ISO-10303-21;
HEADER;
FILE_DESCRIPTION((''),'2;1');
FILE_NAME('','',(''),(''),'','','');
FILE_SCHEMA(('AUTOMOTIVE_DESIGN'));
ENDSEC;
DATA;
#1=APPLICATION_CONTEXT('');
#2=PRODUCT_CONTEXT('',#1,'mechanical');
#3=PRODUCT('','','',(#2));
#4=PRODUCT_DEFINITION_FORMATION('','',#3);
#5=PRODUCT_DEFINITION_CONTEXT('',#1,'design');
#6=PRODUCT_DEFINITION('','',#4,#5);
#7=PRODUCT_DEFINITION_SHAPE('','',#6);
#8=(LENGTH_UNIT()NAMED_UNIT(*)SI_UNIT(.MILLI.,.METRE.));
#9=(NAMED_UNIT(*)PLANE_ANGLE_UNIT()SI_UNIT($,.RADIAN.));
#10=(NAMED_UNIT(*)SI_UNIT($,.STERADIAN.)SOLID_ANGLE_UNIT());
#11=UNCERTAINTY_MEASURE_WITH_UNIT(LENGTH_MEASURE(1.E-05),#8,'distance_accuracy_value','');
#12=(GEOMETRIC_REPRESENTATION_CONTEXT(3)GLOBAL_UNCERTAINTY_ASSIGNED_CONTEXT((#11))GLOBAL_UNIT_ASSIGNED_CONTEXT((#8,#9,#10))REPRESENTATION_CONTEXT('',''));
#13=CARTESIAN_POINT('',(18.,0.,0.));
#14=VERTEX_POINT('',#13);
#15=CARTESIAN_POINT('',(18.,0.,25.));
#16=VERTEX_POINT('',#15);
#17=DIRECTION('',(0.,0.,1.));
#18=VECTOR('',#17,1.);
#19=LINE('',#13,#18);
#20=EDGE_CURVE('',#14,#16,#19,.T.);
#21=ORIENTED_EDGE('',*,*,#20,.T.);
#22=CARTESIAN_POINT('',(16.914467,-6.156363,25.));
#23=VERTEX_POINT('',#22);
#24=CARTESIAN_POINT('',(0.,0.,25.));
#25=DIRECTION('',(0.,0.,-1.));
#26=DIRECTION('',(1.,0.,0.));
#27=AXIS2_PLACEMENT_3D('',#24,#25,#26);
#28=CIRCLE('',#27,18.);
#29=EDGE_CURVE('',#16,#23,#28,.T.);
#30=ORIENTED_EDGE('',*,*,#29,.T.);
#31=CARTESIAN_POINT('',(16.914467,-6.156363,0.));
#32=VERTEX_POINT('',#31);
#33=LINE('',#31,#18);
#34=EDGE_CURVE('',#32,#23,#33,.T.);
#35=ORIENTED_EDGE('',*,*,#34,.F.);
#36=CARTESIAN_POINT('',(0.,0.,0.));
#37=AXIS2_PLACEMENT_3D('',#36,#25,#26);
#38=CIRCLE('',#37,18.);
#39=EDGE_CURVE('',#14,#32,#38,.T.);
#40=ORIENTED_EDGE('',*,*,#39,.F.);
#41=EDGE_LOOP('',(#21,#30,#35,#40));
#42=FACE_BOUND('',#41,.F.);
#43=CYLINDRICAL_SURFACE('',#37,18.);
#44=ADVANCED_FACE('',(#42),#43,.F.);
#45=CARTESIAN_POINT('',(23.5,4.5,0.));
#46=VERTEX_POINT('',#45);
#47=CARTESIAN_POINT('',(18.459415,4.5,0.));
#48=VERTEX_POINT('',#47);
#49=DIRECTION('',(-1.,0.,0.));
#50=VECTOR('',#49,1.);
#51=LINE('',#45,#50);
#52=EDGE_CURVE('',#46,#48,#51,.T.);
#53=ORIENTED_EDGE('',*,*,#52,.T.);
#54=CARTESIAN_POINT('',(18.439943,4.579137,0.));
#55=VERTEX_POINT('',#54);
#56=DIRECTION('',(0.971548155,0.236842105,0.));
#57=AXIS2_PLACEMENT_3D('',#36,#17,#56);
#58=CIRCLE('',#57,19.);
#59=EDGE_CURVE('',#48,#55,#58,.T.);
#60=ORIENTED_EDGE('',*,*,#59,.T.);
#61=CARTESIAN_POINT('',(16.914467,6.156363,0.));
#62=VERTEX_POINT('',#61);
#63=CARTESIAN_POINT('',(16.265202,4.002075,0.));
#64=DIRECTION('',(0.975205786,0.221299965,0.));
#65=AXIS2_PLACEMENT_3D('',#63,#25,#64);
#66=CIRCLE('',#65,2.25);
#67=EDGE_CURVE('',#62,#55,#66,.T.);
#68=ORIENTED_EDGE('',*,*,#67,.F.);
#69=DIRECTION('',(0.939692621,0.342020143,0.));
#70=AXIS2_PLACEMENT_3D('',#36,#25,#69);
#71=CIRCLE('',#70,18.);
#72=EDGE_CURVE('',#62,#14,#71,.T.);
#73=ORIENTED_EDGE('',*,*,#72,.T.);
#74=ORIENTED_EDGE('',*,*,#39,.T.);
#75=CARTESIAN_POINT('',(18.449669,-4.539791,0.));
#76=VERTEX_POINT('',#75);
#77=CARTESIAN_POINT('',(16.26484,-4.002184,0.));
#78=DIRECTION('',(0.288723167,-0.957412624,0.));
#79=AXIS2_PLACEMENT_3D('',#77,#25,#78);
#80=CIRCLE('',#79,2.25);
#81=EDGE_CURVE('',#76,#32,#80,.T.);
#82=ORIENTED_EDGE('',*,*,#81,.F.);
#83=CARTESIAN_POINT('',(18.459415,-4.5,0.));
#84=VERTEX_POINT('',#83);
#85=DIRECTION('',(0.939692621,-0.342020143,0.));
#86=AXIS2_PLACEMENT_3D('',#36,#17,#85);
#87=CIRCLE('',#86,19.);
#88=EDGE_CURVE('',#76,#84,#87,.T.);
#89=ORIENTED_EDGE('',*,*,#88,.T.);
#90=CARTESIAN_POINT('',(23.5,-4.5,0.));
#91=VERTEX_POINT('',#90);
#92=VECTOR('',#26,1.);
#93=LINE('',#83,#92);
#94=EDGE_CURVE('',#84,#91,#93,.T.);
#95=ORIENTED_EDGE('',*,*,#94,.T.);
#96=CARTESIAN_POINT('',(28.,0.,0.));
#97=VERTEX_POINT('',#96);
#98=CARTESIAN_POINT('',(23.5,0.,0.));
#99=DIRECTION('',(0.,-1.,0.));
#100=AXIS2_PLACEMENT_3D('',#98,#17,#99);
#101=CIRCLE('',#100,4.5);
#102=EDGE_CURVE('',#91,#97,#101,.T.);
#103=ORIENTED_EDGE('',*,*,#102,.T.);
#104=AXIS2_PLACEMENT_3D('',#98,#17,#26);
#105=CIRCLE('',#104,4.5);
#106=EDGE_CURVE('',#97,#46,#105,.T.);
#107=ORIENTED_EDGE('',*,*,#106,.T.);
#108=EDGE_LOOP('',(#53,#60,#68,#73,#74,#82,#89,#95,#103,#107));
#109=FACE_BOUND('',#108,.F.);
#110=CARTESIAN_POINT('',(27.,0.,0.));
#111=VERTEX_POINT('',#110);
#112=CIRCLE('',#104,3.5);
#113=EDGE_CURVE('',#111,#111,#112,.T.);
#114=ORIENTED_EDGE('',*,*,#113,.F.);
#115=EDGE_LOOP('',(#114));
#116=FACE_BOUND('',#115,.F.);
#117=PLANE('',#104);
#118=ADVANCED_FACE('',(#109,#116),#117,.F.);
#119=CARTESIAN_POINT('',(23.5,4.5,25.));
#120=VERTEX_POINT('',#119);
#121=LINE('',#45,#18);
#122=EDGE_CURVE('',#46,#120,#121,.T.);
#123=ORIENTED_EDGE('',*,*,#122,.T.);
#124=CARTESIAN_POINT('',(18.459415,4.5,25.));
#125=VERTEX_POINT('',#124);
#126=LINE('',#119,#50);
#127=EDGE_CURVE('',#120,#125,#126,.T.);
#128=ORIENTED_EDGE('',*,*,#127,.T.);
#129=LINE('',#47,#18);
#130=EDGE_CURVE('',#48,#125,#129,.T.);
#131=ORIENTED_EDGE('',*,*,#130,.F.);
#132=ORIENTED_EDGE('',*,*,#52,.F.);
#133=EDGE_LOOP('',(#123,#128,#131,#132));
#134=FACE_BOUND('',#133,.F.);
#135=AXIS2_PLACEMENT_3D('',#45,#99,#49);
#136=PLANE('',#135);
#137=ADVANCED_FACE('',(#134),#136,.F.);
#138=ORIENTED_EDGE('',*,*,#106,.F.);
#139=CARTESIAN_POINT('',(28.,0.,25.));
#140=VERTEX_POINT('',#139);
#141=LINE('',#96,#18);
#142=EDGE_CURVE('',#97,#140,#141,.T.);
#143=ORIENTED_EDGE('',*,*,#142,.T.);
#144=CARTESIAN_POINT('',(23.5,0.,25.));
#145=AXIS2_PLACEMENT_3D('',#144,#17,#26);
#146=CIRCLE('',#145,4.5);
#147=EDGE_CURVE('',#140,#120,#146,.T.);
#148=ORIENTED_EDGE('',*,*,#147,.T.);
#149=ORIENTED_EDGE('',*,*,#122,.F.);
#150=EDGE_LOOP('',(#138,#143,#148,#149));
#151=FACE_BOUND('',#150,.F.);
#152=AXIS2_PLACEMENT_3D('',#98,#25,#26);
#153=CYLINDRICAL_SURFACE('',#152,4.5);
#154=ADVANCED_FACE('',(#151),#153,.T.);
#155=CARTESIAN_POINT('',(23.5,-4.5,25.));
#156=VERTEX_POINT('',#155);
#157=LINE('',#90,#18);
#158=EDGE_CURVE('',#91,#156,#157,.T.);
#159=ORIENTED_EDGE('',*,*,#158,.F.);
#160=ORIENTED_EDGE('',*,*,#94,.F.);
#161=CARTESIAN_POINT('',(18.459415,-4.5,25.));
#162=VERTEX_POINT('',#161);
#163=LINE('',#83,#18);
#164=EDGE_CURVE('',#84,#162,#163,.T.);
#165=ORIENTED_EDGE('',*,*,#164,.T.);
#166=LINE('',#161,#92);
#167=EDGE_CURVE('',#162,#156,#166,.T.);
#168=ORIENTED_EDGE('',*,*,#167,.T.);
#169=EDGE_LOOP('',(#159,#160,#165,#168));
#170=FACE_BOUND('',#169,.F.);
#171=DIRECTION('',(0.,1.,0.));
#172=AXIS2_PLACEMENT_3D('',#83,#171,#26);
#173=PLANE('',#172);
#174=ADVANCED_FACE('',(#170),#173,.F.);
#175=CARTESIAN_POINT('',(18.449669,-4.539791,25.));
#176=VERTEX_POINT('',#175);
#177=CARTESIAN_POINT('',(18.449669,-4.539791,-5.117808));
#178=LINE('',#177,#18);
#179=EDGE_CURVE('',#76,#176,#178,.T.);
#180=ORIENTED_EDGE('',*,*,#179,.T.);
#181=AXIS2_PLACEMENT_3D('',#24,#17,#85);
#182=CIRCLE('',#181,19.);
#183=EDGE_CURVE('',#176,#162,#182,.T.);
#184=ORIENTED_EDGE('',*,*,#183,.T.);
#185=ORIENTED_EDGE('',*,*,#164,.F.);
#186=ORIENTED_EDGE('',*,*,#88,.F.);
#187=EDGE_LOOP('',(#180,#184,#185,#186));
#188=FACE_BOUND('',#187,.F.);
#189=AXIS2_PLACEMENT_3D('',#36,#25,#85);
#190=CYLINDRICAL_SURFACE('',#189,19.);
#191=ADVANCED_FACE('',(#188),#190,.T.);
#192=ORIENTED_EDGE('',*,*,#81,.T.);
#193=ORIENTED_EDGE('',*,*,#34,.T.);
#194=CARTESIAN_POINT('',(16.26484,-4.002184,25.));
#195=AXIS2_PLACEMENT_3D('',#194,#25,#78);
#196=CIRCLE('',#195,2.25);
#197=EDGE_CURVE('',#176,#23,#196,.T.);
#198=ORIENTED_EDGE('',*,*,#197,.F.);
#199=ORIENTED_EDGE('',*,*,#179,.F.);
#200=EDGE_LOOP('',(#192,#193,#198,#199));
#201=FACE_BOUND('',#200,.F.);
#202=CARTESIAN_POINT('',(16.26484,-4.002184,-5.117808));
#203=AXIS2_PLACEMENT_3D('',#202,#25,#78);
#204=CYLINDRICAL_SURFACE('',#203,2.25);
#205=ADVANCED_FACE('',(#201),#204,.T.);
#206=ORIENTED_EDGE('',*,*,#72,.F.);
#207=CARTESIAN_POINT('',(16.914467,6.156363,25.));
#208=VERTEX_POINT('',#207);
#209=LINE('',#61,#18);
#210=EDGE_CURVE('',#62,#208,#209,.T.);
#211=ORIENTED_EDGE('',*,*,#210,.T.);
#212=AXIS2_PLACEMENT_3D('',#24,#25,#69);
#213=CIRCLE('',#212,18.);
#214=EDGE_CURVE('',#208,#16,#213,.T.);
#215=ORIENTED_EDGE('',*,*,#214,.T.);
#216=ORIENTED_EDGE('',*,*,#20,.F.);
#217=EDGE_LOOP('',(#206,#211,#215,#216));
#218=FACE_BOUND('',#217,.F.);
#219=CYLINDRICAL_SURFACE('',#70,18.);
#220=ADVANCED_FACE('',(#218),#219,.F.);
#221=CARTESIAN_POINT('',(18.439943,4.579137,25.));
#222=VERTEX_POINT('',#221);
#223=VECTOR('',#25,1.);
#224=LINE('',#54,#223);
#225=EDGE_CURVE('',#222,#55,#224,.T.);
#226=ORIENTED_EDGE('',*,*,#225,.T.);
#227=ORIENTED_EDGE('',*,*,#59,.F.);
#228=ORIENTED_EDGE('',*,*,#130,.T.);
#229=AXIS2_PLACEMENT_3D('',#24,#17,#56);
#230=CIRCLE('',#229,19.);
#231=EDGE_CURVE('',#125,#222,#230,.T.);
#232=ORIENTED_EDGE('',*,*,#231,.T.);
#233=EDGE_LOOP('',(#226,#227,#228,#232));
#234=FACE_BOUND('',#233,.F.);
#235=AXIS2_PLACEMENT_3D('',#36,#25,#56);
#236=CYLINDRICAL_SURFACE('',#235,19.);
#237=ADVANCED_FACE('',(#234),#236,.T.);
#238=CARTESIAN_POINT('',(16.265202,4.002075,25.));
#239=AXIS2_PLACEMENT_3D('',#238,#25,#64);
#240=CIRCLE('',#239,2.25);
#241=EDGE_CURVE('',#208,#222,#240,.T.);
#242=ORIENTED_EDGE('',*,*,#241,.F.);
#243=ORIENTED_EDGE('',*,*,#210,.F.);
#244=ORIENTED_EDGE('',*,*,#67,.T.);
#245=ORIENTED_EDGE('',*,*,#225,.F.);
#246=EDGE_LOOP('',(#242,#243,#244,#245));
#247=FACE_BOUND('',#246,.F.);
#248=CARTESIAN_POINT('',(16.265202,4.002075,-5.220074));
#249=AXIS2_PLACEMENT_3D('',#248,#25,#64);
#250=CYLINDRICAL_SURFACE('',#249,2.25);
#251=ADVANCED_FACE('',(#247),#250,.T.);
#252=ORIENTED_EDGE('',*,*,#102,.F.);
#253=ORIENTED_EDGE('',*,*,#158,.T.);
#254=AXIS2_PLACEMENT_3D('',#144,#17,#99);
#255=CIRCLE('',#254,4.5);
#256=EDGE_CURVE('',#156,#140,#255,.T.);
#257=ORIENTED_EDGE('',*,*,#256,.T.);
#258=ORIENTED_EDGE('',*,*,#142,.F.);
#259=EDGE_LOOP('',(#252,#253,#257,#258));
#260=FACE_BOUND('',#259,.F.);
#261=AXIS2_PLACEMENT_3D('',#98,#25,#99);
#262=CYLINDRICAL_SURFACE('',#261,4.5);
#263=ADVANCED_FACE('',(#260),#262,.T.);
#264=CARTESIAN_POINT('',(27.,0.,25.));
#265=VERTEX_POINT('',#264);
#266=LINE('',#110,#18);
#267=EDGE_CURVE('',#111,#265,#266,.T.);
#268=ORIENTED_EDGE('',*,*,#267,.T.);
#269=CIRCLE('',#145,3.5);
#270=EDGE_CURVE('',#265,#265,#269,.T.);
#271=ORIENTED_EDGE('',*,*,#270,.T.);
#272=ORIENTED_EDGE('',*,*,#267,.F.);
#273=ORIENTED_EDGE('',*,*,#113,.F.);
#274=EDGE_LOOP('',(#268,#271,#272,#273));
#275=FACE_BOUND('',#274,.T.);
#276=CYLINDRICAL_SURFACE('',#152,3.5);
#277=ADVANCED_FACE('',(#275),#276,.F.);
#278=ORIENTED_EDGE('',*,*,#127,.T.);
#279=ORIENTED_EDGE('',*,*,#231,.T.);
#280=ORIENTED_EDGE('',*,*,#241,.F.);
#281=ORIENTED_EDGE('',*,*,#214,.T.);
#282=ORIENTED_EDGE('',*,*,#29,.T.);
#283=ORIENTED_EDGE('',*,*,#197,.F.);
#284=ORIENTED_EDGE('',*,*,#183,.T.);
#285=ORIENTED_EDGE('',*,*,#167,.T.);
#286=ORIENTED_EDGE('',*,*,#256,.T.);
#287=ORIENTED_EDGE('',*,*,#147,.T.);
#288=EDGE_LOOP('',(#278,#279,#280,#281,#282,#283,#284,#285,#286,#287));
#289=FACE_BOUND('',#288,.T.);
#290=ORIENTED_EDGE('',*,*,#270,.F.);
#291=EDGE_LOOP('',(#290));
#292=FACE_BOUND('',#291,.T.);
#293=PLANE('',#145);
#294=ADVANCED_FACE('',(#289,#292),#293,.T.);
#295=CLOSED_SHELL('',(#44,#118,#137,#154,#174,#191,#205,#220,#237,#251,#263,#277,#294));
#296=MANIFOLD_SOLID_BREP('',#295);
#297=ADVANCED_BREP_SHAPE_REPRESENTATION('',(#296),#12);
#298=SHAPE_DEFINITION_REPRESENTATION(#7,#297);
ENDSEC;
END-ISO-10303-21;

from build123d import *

# Parameters (mm, degrees)
F0_R        = 3.5
F1_DEPTH    = 25
F2_T1_DEPTH = 35.23561564
F2_T3_DEPTH = 35.4401476299


# Not quite as in the source:
# - a fillet or chamfer that OpenCascade refuses, or shapes differently, is made with other operations: its cross-section is extruded or revolved along the edge and cut away or added


with BuildPart() as f1:
    # F0 (on Top) → F1 (new body)
    with BuildSketch(Plane.XY):
        with BuildLine():
            ThreePointArc((23.5, 4.5), (20.3180194847, 3.1819805153), (19, 0))
            ThreePointArc((19, 0), (20.3180194847, -3.1819805153), (23.5, -4.5))
            ThreePointArc((23.5, -4.5), (26.6819805153, -3.1819805153), (28, 0))
            ThreePointArc((28, 0), (26.6819805153, 3.1819805153), (23.5, 4.5))
        make_face()
        with Locations((23.5, 0)):
            Circle(F0_R, mode=Mode.SUBTRACT)
        with BuildLine():
            ThreePointArc((18.459414942, 4.5), (18.8643696409, 2.2661769682), (19, 0))
            ThreePointArc((19, 0), (20.3180194847, 3.1819805153), (23.5, 4.5))
            Line((23.5, 4.5), (18.459414942, 4.5))
        make_face()
        with BuildLine():
            ThreePointArc((23.5, -4.5), (20.3180194847, -3.1819805153), (19, 0))
            ThreePointArc((19, 0), (18.8643696409, -2.2661769682), (18.459414942, -4.5))
            Line((18.459414942, -4.5), (23.5, -4.5))
        make_face()
        with BuildLine():
            ThreePointArc((18.459414942, -4.5), (18.8643696409, -2.2661769682), (19, 0))
            ThreePointArc((19, 0), (18.8643696409, 2.2661769682), (18.459414942, 4.5))
            ThreePointArc((18.459414942, 4.5), (18.1842599773, 5.507512059), (17.8541597949, 6.4983827232))
            Line((17.8541597949, 6.4983827232), (16.9144671741, 6.1563625799))
            ThreePointArc((16.9144671741, 6.1563625799), (17.7265395542, 3.125667198), (18, 0))
            ThreePointArc((18, 0), (17.7265395542, -3.125667198), (16.9144671741, -6.1563625799))
            Line((16.9144671741, -6.1563625799), (17.8541597949, -6.4983827232))
            ThreePointArc((17.8541597949, -6.4983827232), (18.1842599773, -5.507512059), (18.459414942, -4.5))
        make_face()
    extrude(amount=F1_DEPTH)

    # F2: fillet of radius 2.25 on 2 edges, made by hand

    # F2_s2 → F2_t1 (cut)
    with BuildSketch(Plane.XY.offset(-5.11780782)):
        with BuildLine():
            ThreePointArc((16.9144671741, -6.1563625799), (17.8963613222, -5.5515835221), (18.4496693096, -4.5397910048))
            Line((18.4496693096, -4.5397910048), (18.4933658948, -4.5505431414))
            ThreePointArc((18.4933658948, -4.5505431414), (18.2213657624, -5.5402034939), (17.8964459629, -6.5137736296))
            Line((17.8964459629, -6.5137736296), (17.8387688885, -6.5406688911))
            ThreePointArc((17.8387688885, -6.5406688911), (17.3689225781, -6.3696588195), (16.9274597166, -6.1994461479))
            Line((16.9274597166, -6.1994461479), (16.9144671741, -6.1563625799))
        make_face()
    extrude(amount=F2_T1_DEPTH, mode=Mode.SUBTRACT)

    # F2_s4 → F2_t3 (cut)
    with BuildSketch(Plane.XY.offset(-5.2200738149)):
        with BuildLine():
            ThreePointArc((18.459414942, 4.5), (17.9105670548, 5.5367651403), (16.9144671741, 6.1563625799))
            Line((16.9144671741, 6.1563625799), (16.9274524792, 6.1994483299))
            ThreePointArc((16.9274524792, 6.1994483299), (17.3689225781, 6.3696588195), (17.8387688885, 6.5406688911))
            Line((17.8387688885, 6.5406688911), (17.8964459629, 6.5137736296))
            ThreePointArc((17.8964459629, 6.5137736296), (18.2273279614, 5.5205561665), (18.5032992024, 4.5099584984))
            Line((18.5032992024, 4.5099584984), (18.459414942, 4.5))
        make_face()
    extrude(amount=F2_T3_DEPTH, mode=Mode.SUBTRACT)


solid = f1.part
